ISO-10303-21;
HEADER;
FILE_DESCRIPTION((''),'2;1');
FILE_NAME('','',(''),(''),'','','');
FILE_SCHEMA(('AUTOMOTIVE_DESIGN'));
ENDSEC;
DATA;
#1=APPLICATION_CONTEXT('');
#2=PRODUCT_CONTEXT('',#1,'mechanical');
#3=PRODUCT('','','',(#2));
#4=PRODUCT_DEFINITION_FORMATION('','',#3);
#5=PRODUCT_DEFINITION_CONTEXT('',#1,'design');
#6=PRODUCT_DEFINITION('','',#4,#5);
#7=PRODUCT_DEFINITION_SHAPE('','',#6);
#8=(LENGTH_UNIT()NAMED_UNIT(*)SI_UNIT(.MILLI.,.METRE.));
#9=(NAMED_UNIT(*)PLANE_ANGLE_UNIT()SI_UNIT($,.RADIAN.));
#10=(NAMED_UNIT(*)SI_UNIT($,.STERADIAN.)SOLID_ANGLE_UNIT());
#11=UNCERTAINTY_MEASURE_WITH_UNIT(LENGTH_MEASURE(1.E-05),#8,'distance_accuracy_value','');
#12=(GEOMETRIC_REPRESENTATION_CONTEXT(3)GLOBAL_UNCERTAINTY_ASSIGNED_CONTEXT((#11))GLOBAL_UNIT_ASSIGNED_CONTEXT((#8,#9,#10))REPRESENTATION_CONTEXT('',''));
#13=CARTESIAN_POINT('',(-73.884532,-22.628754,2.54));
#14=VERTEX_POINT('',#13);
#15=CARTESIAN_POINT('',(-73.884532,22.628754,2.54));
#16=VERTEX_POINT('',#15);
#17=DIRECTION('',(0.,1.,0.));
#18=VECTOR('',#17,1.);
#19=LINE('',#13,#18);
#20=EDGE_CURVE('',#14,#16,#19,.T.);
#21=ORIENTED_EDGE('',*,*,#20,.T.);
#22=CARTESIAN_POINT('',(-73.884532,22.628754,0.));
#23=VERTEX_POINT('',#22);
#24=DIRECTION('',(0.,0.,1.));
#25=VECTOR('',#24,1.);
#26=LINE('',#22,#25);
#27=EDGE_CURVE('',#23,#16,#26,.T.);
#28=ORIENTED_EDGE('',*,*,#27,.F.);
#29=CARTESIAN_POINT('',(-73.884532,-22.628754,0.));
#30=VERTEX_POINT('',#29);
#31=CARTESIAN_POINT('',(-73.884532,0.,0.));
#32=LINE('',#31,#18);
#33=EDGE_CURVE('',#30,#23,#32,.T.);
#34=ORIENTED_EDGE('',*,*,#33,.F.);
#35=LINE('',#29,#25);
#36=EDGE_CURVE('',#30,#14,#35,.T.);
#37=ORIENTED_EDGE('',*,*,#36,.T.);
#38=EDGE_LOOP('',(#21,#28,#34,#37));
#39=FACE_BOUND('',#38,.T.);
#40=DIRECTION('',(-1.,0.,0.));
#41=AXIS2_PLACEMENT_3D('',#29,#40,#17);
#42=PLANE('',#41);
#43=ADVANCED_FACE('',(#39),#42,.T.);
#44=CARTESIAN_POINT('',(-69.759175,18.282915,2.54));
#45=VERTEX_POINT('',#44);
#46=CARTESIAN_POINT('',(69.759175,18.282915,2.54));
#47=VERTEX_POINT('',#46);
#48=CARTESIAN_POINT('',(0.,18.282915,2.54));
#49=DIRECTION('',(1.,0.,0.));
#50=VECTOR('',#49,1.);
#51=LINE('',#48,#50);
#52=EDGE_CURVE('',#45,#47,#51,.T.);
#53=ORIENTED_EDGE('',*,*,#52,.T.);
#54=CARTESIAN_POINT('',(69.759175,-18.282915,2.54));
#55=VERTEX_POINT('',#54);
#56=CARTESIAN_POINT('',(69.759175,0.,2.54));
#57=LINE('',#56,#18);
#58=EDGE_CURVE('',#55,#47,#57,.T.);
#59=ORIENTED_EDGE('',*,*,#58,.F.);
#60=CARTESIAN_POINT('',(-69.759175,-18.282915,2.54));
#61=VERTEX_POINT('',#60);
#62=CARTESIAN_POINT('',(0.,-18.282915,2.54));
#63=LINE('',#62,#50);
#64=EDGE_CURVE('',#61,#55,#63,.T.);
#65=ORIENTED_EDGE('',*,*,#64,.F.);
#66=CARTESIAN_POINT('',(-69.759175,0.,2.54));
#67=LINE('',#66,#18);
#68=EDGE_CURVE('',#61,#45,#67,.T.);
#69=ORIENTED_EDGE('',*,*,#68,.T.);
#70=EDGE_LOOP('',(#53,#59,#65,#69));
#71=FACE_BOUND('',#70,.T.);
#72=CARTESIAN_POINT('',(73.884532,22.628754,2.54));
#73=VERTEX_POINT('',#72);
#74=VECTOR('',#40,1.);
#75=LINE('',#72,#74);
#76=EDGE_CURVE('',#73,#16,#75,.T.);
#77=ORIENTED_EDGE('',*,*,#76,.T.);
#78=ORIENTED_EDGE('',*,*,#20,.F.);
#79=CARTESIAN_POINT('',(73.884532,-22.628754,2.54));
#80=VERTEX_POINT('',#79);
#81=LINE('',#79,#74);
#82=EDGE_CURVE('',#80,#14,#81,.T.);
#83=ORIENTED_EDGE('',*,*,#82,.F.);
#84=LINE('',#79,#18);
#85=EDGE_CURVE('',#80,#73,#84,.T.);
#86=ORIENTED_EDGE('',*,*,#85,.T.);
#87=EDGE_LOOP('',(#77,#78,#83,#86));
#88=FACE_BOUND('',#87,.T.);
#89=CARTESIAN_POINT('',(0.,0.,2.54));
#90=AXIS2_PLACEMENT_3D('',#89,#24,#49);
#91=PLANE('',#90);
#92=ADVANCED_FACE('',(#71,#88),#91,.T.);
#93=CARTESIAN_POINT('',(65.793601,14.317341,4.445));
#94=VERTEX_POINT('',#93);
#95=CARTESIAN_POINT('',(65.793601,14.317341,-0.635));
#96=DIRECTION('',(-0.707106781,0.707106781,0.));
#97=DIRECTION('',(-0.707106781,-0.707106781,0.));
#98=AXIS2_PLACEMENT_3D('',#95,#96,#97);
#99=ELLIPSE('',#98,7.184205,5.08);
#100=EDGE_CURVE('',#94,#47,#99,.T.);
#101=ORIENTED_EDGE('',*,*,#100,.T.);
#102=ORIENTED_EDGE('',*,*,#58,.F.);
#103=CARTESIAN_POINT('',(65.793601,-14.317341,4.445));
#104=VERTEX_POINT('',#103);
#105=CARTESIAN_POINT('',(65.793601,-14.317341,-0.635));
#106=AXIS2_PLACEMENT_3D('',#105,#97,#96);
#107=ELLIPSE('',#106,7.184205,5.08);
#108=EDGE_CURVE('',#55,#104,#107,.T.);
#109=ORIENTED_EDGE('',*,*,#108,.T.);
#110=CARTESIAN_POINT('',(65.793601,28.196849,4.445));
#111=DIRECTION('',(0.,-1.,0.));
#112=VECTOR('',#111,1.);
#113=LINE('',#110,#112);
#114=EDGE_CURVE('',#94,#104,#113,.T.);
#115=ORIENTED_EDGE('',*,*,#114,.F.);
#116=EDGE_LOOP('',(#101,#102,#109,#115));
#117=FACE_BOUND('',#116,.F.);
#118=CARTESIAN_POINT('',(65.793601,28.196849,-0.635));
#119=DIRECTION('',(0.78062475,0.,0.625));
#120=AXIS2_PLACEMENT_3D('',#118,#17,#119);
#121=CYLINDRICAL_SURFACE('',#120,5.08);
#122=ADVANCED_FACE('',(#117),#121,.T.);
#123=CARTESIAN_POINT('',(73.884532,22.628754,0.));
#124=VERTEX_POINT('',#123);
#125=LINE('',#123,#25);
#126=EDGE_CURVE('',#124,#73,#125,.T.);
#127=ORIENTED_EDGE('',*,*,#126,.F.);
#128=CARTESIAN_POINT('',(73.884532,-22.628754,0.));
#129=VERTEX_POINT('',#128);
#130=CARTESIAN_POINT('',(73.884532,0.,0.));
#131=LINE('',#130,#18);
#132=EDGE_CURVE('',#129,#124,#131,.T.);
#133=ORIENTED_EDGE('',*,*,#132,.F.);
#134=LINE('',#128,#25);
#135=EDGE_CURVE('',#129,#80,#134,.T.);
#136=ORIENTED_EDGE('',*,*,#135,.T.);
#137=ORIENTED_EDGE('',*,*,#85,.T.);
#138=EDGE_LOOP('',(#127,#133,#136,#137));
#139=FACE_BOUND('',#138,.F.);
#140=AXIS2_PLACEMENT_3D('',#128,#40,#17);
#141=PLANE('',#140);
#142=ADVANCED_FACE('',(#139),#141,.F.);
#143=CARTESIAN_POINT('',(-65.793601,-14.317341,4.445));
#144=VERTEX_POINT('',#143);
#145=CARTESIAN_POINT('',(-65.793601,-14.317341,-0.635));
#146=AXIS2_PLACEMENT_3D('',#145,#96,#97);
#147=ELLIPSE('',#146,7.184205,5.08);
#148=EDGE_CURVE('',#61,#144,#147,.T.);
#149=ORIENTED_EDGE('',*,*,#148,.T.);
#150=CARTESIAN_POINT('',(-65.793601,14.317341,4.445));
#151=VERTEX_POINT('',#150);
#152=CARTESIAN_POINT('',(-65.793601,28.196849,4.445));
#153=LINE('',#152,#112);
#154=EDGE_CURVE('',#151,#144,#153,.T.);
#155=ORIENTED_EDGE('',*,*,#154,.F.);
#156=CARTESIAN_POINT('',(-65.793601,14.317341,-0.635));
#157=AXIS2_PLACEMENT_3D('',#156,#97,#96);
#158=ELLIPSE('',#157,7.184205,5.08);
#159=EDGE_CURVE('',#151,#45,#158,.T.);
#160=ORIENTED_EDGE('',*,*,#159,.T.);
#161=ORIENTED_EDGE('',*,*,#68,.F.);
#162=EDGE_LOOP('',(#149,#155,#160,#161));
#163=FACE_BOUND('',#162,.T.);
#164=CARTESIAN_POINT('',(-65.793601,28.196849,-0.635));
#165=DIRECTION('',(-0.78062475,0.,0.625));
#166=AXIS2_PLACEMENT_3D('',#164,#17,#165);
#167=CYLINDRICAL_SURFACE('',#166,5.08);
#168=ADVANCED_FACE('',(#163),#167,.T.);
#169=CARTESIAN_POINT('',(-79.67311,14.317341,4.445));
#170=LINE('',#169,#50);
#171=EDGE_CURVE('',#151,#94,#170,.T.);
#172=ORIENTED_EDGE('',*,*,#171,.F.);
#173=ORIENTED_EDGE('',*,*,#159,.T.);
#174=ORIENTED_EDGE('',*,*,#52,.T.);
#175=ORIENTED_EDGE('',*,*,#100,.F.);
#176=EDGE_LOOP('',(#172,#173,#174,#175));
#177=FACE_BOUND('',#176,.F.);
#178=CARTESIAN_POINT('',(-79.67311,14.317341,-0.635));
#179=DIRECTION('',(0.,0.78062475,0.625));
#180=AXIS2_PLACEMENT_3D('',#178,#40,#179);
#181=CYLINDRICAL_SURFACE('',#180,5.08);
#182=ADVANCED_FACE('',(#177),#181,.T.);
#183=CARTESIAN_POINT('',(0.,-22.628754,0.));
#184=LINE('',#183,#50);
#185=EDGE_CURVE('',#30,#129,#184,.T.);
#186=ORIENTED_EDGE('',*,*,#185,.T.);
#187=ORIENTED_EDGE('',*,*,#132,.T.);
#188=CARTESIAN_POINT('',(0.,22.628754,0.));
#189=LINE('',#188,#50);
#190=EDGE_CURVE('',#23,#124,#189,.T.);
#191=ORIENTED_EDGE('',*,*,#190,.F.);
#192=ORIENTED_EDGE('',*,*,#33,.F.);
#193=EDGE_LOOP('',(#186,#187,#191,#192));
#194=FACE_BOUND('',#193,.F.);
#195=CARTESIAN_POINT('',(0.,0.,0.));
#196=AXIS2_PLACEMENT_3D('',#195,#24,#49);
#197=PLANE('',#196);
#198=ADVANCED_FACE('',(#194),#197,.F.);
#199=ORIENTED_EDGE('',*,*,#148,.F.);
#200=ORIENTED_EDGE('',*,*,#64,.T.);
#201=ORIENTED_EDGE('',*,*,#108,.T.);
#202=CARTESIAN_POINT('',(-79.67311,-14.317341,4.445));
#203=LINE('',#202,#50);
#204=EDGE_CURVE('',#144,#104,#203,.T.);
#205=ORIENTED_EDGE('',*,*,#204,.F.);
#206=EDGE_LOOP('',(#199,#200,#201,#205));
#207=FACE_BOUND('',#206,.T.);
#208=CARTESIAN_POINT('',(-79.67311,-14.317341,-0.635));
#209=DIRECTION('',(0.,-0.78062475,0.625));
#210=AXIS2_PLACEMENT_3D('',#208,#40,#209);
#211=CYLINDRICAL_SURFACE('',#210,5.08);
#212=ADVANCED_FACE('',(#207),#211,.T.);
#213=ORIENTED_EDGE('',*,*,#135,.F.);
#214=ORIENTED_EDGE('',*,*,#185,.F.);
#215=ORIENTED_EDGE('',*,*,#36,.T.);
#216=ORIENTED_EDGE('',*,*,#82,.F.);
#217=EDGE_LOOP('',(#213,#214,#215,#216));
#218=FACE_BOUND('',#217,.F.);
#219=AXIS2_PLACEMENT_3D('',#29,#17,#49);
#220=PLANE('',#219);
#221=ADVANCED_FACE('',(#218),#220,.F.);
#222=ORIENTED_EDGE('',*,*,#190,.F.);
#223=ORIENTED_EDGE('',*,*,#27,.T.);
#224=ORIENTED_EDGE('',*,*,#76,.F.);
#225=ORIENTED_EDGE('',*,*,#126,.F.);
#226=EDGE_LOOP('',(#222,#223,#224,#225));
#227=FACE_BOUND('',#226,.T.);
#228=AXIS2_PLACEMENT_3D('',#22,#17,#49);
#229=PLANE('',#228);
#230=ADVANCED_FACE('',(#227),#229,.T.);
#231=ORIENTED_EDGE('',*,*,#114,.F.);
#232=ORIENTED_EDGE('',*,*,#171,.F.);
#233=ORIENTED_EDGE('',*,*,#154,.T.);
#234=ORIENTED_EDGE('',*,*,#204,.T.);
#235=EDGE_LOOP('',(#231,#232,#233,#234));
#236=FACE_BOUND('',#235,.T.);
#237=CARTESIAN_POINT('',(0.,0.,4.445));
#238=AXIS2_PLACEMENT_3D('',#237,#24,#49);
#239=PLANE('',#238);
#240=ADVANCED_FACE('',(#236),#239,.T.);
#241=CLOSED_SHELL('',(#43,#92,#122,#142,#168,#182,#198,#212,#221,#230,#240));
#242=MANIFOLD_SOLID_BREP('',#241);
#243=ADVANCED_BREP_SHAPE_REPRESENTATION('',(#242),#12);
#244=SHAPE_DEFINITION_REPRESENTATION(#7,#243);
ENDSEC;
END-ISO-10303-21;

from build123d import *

# Parameters (mm, degrees)
F0_W        = 147.7690637112
F0_H        = 45.2575087547
F1_DEPTH    = 2.54
F2_W        = 139.5183503628
F2_H        = 36.5658290684
F3_DEPTH    = 1.905
F4_T1_DEPTH = 159.3462190077
F4_T3_DEPTH = 56.3936977133


# Not quite as in the source:
# - a fillet or chamfer that OpenCascade refuses, or shapes differently, is made with other operations: its cross-section is extruded or revolved along the edge and cut away or added


with BuildPart() as f1:
    # F0 (on Top) → F1 (new body)
    with BuildSketch(Plane.XY):
        Rectangle(F0_W, F0_H)
    extrude(amount=F1_DEPTH)

    # F2 (on face) → F3 (join)
    with BuildSketch(Plane.XY.offset(2.54)):
        Rectangle(F2_W, F2_H)
    extrude(amount=F3_DEPTH)

    # F4: fillet of radius 5.08 on 4 edges, made by hand

    # F4_s2 → F4_t1 (cut)
    with BuildSketch(Plane.YZ.offset(-79.6731095038)):
        with BuildLine():
            ThreePointArc((-18.2829145342, 2.54), (-16.5170453308, 3.9440501198), (-14.3173408052, 4.445))
            Line((-14.3173408052, 4.445), (-18.2829145342, 4.445))
            Line((-18.2829145342, 4.445), (-18.2829145342, 2.54))
        make_face()
        with BuildLine():
            ThreePointArc((18.2829145342, 2.54), (16.5170453308, 3.9440501198), (14.3173408052, 4.445))
            Line((14.3173408052, 4.445), (18.2829145342, 4.445))
            Line((18.2829145342, 4.445), (18.2829145342, 2.54))
        make_face()
    extrude(amount=F4_T1_DEPTH, mode=Mode.SUBTRACT)

    # F4_s4 → F4_t3 (cut)
    with BuildSketch(Plane.XZ.offset(-28.1968488567)):
        with BuildLine():
            ThreePointArc((-69.7591751814, 2.54), (-67.993305978, 3.9440501198), (-65.7936014524, 4.445))
            Line((-65.7936014524, 4.445), (-69.7591751814, 4.445))
            Line((-69.7591751814, 4.445), (-69.7591751814, 2.54))
        make_face()
        with BuildLine():
            ThreePointArc((69.7591751814, 2.54), (67.993305978, 3.9440501198), (65.7936014524, 4.445))
            Line((65.7936014524, 4.445), (69.7591751814, 4.445))
            Line((69.7591751814, 4.445), (69.7591751814, 2.54))
        make_face()
    extrude(amount=F4_T3_DEPTH, mode=Mode.SUBTRACT)


solid = f1.part
